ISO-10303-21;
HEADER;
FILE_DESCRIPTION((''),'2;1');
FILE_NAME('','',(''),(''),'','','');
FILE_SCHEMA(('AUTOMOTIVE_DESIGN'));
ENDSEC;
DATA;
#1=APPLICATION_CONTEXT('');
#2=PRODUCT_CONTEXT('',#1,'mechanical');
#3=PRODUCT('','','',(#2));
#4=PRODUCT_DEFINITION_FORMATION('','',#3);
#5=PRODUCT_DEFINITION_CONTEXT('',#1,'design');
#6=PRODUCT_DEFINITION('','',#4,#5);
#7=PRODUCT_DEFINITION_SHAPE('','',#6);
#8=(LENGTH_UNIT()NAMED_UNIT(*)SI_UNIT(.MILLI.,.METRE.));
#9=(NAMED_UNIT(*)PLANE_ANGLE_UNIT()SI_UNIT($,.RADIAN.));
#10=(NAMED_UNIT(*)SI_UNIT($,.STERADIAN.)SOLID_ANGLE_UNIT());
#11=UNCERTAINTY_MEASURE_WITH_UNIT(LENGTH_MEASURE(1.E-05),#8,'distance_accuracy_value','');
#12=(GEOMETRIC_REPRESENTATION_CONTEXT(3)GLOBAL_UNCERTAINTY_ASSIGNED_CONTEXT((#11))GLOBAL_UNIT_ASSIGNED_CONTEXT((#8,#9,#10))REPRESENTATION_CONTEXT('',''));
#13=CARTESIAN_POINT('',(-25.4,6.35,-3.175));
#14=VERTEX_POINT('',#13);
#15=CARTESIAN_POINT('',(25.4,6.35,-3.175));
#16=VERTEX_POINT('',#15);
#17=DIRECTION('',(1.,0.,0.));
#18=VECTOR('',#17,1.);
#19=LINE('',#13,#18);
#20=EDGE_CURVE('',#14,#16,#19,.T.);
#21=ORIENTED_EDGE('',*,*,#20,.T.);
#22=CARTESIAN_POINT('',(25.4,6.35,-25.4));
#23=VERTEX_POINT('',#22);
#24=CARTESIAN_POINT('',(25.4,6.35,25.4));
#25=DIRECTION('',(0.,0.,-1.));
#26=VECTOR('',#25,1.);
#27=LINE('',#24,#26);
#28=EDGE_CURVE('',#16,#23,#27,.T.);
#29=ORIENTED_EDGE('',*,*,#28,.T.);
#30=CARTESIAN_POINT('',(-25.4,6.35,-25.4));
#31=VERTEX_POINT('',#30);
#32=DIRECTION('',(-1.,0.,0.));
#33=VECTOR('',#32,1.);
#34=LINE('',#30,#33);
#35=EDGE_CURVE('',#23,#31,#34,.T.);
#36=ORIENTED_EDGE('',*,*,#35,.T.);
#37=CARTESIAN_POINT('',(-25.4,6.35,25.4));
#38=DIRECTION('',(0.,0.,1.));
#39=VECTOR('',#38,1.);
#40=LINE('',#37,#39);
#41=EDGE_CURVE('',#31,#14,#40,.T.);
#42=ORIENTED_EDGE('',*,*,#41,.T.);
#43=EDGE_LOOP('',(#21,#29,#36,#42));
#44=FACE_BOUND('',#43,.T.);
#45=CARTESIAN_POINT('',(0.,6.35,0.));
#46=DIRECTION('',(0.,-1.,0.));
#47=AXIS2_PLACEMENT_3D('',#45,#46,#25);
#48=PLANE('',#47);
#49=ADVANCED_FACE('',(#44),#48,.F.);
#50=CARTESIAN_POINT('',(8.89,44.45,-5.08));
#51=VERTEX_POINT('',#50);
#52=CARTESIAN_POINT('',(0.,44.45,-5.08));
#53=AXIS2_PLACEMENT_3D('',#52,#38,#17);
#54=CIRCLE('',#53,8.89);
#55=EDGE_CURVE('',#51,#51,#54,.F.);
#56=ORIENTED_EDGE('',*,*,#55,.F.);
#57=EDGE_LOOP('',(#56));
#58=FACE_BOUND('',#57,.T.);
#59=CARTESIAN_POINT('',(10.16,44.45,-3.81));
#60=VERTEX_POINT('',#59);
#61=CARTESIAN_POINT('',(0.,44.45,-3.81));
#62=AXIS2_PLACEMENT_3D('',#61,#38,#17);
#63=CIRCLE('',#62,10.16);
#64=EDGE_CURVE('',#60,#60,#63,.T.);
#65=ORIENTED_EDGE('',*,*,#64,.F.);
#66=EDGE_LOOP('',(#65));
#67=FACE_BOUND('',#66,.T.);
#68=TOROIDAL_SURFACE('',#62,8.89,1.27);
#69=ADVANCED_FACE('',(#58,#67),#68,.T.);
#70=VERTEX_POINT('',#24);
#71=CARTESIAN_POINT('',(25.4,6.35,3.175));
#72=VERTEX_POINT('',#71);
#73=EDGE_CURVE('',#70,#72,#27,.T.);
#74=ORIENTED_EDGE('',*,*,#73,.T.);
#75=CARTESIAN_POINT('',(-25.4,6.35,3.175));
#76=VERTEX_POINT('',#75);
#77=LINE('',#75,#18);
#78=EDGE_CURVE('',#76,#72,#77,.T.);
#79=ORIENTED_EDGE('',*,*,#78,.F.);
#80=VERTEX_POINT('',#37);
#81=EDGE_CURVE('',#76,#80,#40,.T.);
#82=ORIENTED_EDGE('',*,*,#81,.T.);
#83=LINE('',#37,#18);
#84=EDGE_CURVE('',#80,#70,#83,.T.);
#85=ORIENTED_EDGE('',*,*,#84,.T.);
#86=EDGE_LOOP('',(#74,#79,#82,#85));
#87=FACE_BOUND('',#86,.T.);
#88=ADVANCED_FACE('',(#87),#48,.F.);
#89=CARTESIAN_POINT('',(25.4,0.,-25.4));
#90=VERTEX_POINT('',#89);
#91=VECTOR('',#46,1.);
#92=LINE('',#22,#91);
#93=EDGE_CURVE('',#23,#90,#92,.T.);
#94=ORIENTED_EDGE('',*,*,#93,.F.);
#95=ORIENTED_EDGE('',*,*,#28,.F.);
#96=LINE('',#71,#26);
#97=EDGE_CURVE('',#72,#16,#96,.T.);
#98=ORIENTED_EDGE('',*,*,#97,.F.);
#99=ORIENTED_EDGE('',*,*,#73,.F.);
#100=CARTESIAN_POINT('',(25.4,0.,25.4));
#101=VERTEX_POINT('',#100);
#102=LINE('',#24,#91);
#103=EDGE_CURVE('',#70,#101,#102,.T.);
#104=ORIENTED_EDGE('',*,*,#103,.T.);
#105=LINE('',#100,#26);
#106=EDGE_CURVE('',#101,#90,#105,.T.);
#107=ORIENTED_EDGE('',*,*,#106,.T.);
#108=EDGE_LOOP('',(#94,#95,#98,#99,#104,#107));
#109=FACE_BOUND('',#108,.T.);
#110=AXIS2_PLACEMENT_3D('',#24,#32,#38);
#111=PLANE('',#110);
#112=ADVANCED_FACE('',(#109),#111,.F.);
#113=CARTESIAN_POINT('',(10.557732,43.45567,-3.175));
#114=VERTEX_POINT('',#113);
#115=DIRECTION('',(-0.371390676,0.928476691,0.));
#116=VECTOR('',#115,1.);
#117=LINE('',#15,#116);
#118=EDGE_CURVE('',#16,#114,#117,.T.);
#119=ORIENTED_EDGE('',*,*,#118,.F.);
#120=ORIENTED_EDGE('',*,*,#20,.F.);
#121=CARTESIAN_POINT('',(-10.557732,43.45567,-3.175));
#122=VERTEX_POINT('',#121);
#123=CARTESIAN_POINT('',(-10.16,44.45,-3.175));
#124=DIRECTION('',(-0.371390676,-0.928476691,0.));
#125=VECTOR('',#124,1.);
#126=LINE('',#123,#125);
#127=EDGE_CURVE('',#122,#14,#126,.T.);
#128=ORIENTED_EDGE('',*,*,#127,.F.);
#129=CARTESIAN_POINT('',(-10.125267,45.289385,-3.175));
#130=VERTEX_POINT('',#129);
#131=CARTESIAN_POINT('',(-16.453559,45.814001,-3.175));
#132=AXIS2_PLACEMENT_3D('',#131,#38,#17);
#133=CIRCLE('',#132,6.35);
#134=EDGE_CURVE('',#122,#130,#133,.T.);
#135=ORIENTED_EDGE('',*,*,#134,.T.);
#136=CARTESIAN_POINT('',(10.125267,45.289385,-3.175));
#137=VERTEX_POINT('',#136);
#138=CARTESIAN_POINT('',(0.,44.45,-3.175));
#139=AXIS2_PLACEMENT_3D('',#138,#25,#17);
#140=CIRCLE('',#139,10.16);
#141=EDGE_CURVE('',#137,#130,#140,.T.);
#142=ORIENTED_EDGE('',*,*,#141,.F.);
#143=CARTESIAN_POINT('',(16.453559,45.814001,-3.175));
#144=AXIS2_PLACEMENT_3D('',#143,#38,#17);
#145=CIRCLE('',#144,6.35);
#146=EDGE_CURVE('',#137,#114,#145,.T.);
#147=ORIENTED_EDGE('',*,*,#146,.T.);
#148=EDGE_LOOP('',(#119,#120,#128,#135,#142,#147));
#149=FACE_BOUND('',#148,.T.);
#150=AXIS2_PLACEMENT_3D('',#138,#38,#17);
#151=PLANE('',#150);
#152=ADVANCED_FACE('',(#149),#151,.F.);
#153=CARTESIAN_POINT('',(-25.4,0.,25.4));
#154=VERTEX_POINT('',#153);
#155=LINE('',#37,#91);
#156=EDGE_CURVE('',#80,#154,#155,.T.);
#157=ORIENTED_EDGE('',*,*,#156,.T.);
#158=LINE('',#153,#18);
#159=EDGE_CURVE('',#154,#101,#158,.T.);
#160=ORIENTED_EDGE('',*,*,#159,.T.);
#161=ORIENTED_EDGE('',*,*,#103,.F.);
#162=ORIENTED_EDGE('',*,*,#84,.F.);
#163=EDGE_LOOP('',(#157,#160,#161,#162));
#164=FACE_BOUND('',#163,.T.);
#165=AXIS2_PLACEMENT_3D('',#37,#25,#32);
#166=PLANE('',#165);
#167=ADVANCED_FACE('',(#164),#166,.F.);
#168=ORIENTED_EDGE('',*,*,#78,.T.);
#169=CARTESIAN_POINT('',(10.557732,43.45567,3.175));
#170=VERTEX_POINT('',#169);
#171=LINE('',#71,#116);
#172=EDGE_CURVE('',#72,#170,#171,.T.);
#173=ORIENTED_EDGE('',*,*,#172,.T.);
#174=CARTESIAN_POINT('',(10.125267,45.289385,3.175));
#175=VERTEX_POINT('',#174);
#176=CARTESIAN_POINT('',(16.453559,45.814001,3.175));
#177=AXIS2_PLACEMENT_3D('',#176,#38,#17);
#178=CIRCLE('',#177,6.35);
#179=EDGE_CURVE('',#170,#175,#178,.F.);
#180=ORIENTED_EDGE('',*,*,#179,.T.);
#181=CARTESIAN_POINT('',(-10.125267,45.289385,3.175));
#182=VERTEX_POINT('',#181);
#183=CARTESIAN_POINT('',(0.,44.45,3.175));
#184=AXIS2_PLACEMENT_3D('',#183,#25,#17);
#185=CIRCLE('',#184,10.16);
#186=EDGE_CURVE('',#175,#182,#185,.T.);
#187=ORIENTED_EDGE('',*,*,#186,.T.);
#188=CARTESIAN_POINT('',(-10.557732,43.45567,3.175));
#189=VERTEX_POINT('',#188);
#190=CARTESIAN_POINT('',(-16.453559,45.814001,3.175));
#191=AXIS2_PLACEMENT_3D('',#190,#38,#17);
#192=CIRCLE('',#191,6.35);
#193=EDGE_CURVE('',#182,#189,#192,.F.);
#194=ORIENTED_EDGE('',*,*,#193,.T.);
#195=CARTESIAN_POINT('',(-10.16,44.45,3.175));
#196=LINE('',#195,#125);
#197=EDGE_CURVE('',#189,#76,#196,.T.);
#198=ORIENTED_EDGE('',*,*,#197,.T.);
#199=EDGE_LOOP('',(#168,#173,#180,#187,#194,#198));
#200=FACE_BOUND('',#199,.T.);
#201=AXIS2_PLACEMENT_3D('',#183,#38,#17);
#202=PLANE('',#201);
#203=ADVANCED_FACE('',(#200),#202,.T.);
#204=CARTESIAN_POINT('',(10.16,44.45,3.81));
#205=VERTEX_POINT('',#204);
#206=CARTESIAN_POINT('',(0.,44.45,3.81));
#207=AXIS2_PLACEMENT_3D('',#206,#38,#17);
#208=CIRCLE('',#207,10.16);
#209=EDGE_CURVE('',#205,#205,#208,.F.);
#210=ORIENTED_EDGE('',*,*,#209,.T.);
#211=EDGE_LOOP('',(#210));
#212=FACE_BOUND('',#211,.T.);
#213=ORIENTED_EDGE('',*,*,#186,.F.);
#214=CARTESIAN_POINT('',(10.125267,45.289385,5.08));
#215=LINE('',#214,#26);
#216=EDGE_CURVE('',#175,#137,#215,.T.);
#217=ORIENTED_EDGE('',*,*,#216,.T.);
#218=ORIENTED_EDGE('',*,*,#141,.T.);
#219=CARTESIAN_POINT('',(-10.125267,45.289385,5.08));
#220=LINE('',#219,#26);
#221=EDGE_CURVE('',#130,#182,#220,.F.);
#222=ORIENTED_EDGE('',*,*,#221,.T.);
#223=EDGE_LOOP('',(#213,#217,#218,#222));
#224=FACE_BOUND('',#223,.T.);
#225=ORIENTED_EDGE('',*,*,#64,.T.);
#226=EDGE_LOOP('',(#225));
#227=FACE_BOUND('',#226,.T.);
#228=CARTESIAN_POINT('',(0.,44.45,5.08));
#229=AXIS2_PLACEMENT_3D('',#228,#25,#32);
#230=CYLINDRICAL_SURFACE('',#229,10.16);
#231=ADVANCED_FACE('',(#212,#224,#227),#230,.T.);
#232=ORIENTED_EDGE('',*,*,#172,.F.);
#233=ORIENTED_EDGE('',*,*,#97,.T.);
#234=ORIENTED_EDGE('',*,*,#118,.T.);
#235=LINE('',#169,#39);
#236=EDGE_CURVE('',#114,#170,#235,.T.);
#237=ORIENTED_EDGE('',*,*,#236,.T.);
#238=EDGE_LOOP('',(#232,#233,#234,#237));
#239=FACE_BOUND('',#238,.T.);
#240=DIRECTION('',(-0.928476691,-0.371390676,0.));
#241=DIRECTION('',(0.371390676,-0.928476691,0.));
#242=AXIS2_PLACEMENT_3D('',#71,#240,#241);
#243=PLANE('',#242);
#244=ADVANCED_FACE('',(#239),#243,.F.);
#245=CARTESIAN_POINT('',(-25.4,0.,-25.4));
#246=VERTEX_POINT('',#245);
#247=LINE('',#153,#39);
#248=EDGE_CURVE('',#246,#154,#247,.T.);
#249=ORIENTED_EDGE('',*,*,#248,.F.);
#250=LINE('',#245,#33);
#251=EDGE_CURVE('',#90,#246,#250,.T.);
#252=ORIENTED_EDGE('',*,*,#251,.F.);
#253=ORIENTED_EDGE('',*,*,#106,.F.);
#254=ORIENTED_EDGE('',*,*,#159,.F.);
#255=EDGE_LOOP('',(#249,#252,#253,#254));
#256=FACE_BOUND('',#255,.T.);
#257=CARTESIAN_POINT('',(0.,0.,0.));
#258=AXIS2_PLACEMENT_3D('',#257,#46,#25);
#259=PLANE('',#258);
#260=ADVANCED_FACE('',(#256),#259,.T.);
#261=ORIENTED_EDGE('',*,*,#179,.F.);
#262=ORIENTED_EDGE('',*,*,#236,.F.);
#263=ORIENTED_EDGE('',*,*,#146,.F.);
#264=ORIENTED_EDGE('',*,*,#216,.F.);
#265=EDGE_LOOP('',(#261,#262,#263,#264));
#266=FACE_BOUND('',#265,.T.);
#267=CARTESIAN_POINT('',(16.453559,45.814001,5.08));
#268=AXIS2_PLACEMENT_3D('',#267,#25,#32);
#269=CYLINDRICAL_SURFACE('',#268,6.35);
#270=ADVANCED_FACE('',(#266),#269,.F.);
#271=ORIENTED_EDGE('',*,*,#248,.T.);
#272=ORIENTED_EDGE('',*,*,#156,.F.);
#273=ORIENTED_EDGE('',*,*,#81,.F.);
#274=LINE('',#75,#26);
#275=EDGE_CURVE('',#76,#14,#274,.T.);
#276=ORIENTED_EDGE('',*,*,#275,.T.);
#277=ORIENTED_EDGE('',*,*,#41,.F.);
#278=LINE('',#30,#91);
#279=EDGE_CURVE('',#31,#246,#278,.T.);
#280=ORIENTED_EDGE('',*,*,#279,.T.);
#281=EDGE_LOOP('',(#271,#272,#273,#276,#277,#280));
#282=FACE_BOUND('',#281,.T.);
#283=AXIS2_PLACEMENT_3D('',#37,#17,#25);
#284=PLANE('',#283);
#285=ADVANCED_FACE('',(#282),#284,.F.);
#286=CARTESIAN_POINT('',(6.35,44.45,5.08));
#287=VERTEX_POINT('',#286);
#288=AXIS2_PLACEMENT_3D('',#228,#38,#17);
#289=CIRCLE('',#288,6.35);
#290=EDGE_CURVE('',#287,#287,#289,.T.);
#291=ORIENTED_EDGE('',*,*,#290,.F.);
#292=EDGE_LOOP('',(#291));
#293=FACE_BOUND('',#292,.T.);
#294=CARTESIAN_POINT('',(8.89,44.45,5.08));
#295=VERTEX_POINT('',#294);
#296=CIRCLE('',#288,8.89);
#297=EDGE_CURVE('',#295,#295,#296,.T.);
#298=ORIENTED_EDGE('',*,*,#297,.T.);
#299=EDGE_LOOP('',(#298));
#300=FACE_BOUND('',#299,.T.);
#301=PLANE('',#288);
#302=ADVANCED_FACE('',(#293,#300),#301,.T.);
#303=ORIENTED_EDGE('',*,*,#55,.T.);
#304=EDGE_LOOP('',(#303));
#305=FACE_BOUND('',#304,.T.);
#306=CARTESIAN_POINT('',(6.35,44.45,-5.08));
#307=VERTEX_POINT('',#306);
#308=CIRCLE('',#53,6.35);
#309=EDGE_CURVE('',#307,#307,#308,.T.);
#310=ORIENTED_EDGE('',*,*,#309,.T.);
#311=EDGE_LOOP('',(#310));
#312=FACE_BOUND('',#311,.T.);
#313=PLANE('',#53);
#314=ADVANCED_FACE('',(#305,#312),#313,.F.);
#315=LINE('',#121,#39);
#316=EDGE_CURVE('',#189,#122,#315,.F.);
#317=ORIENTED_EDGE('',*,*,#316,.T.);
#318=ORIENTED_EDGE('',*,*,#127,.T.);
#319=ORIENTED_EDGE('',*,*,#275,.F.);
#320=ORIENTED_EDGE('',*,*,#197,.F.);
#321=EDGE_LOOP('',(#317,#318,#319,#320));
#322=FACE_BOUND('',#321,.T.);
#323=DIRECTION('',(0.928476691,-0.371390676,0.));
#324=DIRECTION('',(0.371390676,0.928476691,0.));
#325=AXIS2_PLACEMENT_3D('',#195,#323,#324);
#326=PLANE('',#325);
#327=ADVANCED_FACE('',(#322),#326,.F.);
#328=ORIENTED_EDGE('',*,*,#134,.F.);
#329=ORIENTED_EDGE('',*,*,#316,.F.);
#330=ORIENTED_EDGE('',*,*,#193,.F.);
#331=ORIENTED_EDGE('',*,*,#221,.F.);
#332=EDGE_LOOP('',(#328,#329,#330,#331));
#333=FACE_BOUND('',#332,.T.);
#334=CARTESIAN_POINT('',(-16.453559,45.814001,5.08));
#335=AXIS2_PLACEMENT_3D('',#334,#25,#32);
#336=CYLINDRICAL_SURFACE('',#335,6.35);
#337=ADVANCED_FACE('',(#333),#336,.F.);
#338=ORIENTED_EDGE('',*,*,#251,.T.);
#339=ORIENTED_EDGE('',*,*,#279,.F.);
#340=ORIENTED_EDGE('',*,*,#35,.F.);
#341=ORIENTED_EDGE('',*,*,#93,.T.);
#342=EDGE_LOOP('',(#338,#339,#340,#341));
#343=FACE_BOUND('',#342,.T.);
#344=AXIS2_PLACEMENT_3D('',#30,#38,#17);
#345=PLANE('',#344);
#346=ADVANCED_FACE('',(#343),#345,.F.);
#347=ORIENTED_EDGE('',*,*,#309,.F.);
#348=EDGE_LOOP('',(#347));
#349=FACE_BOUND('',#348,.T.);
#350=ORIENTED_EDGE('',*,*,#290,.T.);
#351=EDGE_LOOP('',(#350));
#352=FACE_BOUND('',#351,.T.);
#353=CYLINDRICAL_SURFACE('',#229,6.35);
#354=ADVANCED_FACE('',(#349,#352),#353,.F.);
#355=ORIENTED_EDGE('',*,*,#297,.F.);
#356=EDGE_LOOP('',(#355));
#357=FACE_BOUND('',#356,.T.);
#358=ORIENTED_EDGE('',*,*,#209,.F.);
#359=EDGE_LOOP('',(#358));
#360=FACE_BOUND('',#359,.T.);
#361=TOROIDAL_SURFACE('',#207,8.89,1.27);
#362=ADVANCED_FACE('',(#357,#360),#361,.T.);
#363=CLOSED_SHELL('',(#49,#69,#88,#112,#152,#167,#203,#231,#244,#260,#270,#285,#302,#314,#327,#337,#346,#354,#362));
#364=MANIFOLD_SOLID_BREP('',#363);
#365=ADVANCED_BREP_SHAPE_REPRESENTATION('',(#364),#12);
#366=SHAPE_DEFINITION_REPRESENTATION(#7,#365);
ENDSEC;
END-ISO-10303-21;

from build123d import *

# Parameters (mm, degrees)
SKETCH1_W           = 50.8
SKETCH1_H           = 50.8
BOSS_EXTRUDE1_DEPTH = 6.35
SKETCH2_R           = 10.16
SKETCH2_R_2         = 6.35
BOSS_EXTRUDE2_DEPTH = 5.08
BOSS_EXTRUDE3_DEPTH = 3.175
FILLET3_R           = 6.35


with BuildPart() as part:
    # Sketch1 → Boss-Extrude1 (new body)
    with BuildSketch(Plane(origin=(0, 0, 0), x_dir=(1, 0, 0), z_dir=(0, 1, 0))):
        Rectangle(SKETCH1_W, SKETCH1_H)
    extrude(amount=BOSS_EXTRUDE1_DEPTH)



with BuildPart() as body_2:
    # Sketch2 → Boss-Extrude2 (new, symmetric)
    with BuildSketch(Plane.XY):
        with Locations((0, 44.45)):
            Circle(SKETCH2_R)
        with Locations((0, 44.45)):
            Circle(SKETCH2_R_2, mode=Mode.SUBTRACT)
    extrude(amount=BOSS_EXTRUDE2_DEPTH, both=True)


with BuildPart() as part_1:
    add(part.part)

    add(body_2.part)  # Boss-Extrude3 merges body 2
    # Sketch4 → Boss-Extrude3 (add, symmetric)
    with BuildSketch(Plane.XY):
        with BuildLine():
            Line((-10.16, 44.45), (-25.4, 6.35))
            Line((-25.4, 6.35), (25.4, 6.35))
            Line((25.4, 6.35), (10.16, 44.45))
            ThreePointArc((10.16, 44.45), (0, 34.29), (-10.16, 44.45))
        make_face()
    extrude(amount=BOSS_EXTRUDE3_DEPTH, both=True)

    # Fillet2: read off the stored shape, not the designer's step
    # Fillet2 outline → Fillet2 (revolve, cut)
    with BuildSketch(Plane.XZ.offset(-44.45)):
        with BuildLine():
            ThreePointArc((10.16, -3.81), (9.788025612, -4.708025612), (8.89, -5.08))
            Line((8.89, -5.08), (10.16, -5.08))
            Line((10.16, -5.08), (10.16, -3.81))
        make_face()
        with BuildLine():
            ThreePointArc((8.89, 5.08), (9.788025612, 4.708025612), (10.16, 3.81))
            Line((10.16, 3.81), (10.16, 5.08))
            Line((10.16, 5.08), (8.89, 5.08))
        make_face()
    revolve(axis=Axis((0, 44.45, 0), (0, 0, 1)), mode=Mode.SUBTRACT)

    # Fillet3
    # the kernel refuses this fillet: 6.35 mm, written as the material it adds along each edge
    with BuildSketch(Plane(origin=(10.16, 44.45, 3.175), x_dir=(-0.041343675933645734, 0.9991449847045691, 0), z_dir=(0, 0, -1))) as fillet3_piece_1:
        with BuildLine():
            CenterArc((1.102635837, 6.344570653), FILLET3_R, 250.56808401, 17.062422493)
            Line((-1.009923388, 0.356282624), (0, 0))
            ThreePointArc((0, 0), (0.420051747, 0.008686955), (0.840103495, 0))
        make_face()
    extrude(amount=6.35)
    with BuildSketch(Plane(origin=(-10.16, 44.45, 3.175), x_dir=(0.04134367593364538, 0.9991449847045691, 0), z_dir=(0, 0, -1))) as fillet3_piece_2:
        with BuildLine():
            CenterArc((1.102635837, -6.344570653), FILLET3_R, 92.369493497, 17.062422493)
            Line((-1.009923388, -0.356282624), (0, 0))
            ThreePointArc((0, 0), (0.420051747, -0.008686955), (0.840103495, 0))
        make_face()
    extrude(amount=6.35)


solid = part_1.part
